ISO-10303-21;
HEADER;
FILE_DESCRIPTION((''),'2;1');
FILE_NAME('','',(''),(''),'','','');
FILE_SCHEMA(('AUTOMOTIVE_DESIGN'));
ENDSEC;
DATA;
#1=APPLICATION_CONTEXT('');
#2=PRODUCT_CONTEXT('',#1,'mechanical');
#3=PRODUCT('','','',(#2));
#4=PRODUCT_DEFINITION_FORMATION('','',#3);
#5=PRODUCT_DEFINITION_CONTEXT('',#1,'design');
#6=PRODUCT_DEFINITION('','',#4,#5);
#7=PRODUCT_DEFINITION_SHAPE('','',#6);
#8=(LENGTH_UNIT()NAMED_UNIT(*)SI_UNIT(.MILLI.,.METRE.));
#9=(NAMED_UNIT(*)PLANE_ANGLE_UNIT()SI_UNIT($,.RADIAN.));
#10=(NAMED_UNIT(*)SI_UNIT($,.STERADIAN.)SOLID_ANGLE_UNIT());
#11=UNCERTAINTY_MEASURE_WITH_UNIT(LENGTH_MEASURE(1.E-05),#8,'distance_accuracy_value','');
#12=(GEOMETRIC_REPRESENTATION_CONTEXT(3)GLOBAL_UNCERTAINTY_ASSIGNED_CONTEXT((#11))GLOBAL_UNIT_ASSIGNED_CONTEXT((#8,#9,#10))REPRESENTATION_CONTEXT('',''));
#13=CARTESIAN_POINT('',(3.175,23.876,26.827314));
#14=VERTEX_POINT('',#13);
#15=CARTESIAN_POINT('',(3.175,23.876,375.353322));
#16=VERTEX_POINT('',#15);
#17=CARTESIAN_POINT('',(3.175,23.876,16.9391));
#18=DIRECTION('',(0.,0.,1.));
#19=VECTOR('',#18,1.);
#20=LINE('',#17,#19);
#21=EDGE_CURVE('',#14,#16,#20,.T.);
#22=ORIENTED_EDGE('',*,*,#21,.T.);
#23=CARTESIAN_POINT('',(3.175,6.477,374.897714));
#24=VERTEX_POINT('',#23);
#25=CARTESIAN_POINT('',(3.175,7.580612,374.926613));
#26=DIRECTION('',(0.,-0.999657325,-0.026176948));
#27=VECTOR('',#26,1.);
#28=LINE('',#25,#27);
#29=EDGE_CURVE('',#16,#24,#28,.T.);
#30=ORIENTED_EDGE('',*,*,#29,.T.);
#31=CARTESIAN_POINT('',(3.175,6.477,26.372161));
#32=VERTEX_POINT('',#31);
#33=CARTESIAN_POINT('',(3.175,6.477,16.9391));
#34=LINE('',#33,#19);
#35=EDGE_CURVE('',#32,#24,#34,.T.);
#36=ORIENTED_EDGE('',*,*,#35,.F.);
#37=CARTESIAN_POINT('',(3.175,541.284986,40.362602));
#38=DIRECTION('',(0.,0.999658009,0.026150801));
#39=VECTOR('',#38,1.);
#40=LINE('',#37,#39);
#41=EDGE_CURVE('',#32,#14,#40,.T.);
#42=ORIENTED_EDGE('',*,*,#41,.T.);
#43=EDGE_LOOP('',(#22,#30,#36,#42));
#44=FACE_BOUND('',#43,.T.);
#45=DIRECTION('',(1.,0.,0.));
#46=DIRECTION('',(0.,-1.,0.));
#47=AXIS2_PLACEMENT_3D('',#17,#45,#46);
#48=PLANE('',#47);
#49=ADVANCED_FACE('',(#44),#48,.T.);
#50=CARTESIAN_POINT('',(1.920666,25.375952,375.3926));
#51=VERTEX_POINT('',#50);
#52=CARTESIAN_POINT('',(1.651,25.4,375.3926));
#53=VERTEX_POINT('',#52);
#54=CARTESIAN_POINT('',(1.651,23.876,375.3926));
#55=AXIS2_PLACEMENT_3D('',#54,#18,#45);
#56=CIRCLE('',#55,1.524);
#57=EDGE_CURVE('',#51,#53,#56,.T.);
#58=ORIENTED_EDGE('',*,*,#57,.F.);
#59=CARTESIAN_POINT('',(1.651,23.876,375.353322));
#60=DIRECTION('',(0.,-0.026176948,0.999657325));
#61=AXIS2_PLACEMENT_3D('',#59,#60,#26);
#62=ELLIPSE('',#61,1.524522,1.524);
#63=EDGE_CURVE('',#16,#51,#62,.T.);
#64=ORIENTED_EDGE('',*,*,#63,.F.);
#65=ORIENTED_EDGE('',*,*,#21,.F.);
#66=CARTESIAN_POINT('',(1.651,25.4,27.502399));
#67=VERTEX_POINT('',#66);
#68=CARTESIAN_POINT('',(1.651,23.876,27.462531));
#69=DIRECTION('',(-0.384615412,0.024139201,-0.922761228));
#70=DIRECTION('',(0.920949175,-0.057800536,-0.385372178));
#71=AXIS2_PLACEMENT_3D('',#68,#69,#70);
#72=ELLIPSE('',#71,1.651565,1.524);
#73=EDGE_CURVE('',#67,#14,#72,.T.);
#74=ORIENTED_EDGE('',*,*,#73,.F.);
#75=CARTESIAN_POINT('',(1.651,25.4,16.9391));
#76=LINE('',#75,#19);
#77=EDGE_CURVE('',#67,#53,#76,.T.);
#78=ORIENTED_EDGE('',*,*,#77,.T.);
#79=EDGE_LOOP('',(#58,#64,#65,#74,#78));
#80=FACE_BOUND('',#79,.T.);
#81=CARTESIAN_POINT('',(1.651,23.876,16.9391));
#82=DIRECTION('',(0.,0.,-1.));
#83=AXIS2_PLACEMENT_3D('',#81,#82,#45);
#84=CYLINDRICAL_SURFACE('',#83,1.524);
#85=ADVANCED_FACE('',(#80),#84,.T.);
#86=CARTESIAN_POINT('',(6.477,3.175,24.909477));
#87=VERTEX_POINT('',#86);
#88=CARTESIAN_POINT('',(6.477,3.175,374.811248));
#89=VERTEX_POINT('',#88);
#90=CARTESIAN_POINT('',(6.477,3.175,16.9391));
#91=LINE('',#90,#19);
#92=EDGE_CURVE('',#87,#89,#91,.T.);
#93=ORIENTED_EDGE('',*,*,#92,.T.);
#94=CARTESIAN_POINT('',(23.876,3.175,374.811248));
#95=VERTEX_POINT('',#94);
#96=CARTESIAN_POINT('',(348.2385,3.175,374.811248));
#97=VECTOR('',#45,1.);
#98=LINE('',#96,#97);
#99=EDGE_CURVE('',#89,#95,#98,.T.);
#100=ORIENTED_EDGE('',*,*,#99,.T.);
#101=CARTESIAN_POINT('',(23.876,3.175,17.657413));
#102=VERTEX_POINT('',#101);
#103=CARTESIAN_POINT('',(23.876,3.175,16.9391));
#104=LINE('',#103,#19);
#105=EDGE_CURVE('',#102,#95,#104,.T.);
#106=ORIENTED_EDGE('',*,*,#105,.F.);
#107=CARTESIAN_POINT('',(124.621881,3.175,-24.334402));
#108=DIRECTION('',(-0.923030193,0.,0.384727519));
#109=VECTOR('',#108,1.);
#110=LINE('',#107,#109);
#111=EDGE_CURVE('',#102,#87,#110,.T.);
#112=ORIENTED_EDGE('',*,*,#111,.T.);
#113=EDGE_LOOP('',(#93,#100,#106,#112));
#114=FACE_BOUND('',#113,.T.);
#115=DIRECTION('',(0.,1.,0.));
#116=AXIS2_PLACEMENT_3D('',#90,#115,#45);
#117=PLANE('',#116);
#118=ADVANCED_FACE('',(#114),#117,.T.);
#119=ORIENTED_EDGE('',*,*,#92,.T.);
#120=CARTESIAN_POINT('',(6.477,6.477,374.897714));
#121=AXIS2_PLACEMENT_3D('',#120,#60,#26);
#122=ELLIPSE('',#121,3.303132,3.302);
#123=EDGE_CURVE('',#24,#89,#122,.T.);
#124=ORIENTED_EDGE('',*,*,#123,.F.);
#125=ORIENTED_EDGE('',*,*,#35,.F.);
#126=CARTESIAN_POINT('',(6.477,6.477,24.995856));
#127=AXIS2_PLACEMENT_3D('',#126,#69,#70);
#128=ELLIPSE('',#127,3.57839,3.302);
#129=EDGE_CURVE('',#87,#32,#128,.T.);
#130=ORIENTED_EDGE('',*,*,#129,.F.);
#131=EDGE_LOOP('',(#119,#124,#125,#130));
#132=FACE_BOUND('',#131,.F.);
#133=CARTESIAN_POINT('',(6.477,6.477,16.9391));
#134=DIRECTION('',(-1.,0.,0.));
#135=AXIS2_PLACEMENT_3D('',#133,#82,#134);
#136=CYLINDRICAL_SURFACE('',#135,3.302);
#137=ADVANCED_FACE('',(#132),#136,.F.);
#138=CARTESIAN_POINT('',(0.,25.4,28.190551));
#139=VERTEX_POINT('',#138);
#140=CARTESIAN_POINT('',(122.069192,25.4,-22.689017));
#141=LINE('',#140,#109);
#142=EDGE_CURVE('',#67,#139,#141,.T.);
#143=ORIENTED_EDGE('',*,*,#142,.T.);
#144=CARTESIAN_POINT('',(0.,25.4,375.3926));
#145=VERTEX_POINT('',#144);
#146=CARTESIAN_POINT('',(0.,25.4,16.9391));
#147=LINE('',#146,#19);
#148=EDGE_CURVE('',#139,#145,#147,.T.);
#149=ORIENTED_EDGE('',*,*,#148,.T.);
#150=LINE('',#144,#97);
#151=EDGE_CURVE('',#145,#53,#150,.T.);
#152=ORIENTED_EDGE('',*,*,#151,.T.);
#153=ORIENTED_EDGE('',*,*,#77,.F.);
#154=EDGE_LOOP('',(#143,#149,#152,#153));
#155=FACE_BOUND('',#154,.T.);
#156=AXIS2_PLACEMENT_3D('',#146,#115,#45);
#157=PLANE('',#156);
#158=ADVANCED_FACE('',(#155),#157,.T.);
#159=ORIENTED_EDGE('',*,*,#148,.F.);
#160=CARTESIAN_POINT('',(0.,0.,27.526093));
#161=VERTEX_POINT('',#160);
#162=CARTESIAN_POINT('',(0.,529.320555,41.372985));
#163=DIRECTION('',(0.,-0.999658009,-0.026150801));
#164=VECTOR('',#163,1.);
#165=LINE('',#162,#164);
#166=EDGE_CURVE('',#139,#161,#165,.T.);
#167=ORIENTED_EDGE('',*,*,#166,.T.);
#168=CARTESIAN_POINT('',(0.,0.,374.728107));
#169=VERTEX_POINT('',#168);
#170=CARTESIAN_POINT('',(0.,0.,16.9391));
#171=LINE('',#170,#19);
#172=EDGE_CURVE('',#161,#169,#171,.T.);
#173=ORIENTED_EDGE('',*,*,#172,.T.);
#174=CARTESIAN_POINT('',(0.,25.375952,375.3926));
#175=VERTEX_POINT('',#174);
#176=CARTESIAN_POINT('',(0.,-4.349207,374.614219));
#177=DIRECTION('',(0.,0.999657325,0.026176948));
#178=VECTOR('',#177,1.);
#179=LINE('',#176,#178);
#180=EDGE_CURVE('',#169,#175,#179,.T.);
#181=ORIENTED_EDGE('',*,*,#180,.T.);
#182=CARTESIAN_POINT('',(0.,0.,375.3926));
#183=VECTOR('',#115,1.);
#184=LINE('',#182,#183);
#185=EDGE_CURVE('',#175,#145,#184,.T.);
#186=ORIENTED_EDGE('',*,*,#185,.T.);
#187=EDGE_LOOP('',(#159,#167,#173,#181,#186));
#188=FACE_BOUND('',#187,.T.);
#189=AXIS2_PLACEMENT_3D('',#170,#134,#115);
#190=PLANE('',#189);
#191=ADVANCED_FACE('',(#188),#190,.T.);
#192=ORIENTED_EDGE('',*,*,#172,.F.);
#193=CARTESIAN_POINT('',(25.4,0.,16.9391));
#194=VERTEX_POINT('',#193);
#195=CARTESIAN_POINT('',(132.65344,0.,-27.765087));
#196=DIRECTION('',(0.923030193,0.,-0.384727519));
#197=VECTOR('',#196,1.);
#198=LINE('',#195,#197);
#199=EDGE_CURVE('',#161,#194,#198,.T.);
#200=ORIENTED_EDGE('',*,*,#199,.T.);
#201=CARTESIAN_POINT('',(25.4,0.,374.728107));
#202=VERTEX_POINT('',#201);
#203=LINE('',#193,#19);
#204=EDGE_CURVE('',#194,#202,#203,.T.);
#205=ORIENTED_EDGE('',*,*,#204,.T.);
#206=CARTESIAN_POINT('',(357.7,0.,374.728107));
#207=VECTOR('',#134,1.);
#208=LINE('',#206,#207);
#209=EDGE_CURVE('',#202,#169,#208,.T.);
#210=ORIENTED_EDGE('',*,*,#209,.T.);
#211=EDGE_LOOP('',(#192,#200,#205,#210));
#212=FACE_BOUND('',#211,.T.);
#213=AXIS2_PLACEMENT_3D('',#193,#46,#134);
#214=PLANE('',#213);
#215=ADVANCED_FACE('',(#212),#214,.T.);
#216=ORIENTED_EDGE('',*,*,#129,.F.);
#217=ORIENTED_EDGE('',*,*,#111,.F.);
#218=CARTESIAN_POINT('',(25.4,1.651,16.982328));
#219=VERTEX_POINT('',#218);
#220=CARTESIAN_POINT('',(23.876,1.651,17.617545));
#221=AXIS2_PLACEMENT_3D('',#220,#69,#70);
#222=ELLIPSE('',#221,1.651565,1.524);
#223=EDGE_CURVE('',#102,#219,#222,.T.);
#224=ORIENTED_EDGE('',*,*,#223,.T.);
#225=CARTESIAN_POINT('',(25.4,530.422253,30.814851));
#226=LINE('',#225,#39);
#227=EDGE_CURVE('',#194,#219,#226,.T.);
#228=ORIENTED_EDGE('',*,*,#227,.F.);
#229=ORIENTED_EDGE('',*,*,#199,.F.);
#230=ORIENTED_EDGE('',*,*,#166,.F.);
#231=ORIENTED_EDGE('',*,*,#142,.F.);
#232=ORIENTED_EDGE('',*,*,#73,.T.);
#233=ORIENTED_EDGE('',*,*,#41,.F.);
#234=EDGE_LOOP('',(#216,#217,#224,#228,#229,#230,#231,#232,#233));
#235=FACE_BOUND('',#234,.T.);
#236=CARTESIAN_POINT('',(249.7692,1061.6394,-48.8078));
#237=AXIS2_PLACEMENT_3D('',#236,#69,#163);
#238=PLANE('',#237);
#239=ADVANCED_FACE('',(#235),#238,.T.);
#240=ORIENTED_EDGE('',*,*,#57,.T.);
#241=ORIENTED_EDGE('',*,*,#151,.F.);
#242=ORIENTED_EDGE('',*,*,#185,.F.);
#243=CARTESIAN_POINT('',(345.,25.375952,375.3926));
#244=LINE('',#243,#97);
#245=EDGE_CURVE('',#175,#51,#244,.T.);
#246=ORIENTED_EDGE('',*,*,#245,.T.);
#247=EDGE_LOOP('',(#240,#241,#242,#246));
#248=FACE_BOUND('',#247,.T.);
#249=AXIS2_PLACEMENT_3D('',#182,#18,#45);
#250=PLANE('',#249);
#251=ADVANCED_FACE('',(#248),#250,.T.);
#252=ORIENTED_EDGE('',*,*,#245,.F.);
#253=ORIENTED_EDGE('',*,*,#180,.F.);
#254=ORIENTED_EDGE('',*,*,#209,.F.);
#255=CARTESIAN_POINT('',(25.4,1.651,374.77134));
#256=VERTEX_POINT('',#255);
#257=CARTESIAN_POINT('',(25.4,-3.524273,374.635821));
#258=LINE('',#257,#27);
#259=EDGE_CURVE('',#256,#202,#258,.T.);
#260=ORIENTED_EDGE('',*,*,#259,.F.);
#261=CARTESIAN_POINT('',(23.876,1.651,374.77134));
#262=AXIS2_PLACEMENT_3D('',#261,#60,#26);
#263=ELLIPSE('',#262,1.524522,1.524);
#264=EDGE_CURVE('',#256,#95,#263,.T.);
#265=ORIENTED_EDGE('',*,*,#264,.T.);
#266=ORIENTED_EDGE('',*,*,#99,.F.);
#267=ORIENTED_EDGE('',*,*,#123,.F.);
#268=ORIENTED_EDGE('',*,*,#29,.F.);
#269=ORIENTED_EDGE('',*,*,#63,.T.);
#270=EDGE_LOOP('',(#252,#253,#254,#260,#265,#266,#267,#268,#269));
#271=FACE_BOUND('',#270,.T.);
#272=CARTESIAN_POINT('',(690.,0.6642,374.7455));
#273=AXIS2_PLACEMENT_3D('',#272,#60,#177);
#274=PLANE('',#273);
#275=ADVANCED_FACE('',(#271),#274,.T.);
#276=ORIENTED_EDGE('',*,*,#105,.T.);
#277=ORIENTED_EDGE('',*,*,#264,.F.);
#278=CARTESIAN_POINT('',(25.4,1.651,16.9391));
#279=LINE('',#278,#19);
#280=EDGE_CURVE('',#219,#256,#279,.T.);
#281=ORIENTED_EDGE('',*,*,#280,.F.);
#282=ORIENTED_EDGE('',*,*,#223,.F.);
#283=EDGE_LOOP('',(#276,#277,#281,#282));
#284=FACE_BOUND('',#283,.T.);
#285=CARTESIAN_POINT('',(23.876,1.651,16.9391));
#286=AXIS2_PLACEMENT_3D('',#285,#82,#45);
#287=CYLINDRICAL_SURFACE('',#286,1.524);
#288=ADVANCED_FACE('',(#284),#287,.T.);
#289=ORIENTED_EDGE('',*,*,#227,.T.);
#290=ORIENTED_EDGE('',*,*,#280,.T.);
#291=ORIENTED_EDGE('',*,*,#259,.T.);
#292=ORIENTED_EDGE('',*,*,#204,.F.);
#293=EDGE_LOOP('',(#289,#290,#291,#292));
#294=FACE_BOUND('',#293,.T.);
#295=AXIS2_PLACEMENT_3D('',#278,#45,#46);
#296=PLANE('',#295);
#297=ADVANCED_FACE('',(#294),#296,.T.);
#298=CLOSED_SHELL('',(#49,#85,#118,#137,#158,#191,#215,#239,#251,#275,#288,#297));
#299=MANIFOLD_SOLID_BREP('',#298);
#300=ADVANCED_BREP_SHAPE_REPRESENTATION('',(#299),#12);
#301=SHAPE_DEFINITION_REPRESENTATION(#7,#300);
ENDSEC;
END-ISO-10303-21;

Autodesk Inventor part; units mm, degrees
ref_plane "Start Plane" through (0, 0, 16.9391) normal (0, 0, 1) x (1, 0, 0)
ref_plane "End Plane" through (0, 0, 375.3926) normal (0, 0, 1) x (1, 0, 0)
sketch "Sketch" plane through (0, 0, 0) normal (0, 0, 1) x (1, 0, 0)
  line L0 (25.4, 0) -> (0, 0)
  line L1 (0, 0) -> (0, 25.4)
  line L2 (0, 25.4) -> (1.651, 25.4)
  line L3 (3.175, 23.876) -> (3.175, 6.477)
  line L4 (6.477, 3.175) -> (23.876, 3.175)
  line L5 (25.4, 1.651) -> (25.4, 0)
  line L6 (0, -11.0414) -> (0, 31.5385) construction
  line L7 (-11.0414, 0) -> (31.5385, 0) construction
  arc A0 (3.175, 6.477) -> (6.477, 3.175) centre (6.477, 6.477) ccw
  arc A1 (3.175, 23.876) -> (1.651, 25.4) centre (1.651, 23.876) ccw
  arc A2 (25.4, 1.651) -> (23.876, 3.175) centre (23.876, 1.651) ccw
  line L8 (0, 40.0545) -> (0, -19.5574) construction
  line L9 (-19.5574, 0) -> (40.0545, 0) construction
  point P0 (3.175, 25.4)
  point P1 (3.175, 3.175)
  point P2 (25.4, 3.175)
  dimension "d0" = 25.4
  dimension "d1" = 25.4
  dimension "d2" = 3.175
  dimension "d3" = 3.175
  dimension "d10" = 0
  dimension "d11" = 0
  dimension "d14" = 3.302
  dimension "d15" = 1.524
extrude "Body" add sketch "Sketch" along normal up to surface (358.4535 mm away) from surface at 16.9391
sketch "Sketch3" plane through (0, 0, 0) normal (0, 0, 1) x (1, 0, 0)
  line L0 (0, 0) -> (10, 0)
ref_plane "Work Plane3" through (0, 0, 0) normal (0, -1, 0) x (1, 0, 0)
ref_plane "Work Plane5" through (690, 0.6642, 374.7455) normal (0, -0.0261508, 0.999658) x (1, 0, 0)
split "Split2" plane through (690, 0.6642, 374.7455) removes the side toward (0, -0.0261508, 0.999658)
ref_plane "Work Plane6" through (249.7692, 1061.6394, -48.8078) normal (-0.3846154, 0.0241392, -0.9227612) x (-0.9152171, 0.1202029, 0.3846154)
split "Split3" plane through (249.7692, 1061.6394, -48.8078) removes the side toward (-0.3846154, 0.0241392, -0.9227612)
sketch "Sketch4" plane through (0, 0, 0) normal (0, -1, 0) x (1, 0, 0)
  line L0 (-2, 16.9391) -> (12, 16.9391) projected
  line L1 (-2, 375.3926) -> (12, 375.3926) projected
  dimension "d17" = 358.4535
equation "\"d0\" = G_H"
equation "\"d1\" = G_H"
equation "\"d2\" = G_T"
equation "\"d3\" = G_T"
equation "\"d14\" = G_IR"
equation "\"d15\" = G_ER"
equation "\"d4\" = G_L"
equation "\"G_H\" = 25.4"
equation "\"G_T\" = 3.175"
equation "\"G_ER\" = 1.524"
equation "\"G_IR\" = 3.302"
equation "\"G_L\" = d17"
equation "\"ex\" = 0"
equation "\"G_OFFSET_START\" = -16.93913"
equation "\"G_OFFSET_END\" = -24.74423"
equation "\"d12\" = -G_OFFSET_START"
equation "\"d13\" = G_OFFSET_END + B_L"
equation "\"B_L\" = 400.13684"
properties part number "AISC - L 1 x 1 x 1/8 - 14.112" material "Steel, Mild"
